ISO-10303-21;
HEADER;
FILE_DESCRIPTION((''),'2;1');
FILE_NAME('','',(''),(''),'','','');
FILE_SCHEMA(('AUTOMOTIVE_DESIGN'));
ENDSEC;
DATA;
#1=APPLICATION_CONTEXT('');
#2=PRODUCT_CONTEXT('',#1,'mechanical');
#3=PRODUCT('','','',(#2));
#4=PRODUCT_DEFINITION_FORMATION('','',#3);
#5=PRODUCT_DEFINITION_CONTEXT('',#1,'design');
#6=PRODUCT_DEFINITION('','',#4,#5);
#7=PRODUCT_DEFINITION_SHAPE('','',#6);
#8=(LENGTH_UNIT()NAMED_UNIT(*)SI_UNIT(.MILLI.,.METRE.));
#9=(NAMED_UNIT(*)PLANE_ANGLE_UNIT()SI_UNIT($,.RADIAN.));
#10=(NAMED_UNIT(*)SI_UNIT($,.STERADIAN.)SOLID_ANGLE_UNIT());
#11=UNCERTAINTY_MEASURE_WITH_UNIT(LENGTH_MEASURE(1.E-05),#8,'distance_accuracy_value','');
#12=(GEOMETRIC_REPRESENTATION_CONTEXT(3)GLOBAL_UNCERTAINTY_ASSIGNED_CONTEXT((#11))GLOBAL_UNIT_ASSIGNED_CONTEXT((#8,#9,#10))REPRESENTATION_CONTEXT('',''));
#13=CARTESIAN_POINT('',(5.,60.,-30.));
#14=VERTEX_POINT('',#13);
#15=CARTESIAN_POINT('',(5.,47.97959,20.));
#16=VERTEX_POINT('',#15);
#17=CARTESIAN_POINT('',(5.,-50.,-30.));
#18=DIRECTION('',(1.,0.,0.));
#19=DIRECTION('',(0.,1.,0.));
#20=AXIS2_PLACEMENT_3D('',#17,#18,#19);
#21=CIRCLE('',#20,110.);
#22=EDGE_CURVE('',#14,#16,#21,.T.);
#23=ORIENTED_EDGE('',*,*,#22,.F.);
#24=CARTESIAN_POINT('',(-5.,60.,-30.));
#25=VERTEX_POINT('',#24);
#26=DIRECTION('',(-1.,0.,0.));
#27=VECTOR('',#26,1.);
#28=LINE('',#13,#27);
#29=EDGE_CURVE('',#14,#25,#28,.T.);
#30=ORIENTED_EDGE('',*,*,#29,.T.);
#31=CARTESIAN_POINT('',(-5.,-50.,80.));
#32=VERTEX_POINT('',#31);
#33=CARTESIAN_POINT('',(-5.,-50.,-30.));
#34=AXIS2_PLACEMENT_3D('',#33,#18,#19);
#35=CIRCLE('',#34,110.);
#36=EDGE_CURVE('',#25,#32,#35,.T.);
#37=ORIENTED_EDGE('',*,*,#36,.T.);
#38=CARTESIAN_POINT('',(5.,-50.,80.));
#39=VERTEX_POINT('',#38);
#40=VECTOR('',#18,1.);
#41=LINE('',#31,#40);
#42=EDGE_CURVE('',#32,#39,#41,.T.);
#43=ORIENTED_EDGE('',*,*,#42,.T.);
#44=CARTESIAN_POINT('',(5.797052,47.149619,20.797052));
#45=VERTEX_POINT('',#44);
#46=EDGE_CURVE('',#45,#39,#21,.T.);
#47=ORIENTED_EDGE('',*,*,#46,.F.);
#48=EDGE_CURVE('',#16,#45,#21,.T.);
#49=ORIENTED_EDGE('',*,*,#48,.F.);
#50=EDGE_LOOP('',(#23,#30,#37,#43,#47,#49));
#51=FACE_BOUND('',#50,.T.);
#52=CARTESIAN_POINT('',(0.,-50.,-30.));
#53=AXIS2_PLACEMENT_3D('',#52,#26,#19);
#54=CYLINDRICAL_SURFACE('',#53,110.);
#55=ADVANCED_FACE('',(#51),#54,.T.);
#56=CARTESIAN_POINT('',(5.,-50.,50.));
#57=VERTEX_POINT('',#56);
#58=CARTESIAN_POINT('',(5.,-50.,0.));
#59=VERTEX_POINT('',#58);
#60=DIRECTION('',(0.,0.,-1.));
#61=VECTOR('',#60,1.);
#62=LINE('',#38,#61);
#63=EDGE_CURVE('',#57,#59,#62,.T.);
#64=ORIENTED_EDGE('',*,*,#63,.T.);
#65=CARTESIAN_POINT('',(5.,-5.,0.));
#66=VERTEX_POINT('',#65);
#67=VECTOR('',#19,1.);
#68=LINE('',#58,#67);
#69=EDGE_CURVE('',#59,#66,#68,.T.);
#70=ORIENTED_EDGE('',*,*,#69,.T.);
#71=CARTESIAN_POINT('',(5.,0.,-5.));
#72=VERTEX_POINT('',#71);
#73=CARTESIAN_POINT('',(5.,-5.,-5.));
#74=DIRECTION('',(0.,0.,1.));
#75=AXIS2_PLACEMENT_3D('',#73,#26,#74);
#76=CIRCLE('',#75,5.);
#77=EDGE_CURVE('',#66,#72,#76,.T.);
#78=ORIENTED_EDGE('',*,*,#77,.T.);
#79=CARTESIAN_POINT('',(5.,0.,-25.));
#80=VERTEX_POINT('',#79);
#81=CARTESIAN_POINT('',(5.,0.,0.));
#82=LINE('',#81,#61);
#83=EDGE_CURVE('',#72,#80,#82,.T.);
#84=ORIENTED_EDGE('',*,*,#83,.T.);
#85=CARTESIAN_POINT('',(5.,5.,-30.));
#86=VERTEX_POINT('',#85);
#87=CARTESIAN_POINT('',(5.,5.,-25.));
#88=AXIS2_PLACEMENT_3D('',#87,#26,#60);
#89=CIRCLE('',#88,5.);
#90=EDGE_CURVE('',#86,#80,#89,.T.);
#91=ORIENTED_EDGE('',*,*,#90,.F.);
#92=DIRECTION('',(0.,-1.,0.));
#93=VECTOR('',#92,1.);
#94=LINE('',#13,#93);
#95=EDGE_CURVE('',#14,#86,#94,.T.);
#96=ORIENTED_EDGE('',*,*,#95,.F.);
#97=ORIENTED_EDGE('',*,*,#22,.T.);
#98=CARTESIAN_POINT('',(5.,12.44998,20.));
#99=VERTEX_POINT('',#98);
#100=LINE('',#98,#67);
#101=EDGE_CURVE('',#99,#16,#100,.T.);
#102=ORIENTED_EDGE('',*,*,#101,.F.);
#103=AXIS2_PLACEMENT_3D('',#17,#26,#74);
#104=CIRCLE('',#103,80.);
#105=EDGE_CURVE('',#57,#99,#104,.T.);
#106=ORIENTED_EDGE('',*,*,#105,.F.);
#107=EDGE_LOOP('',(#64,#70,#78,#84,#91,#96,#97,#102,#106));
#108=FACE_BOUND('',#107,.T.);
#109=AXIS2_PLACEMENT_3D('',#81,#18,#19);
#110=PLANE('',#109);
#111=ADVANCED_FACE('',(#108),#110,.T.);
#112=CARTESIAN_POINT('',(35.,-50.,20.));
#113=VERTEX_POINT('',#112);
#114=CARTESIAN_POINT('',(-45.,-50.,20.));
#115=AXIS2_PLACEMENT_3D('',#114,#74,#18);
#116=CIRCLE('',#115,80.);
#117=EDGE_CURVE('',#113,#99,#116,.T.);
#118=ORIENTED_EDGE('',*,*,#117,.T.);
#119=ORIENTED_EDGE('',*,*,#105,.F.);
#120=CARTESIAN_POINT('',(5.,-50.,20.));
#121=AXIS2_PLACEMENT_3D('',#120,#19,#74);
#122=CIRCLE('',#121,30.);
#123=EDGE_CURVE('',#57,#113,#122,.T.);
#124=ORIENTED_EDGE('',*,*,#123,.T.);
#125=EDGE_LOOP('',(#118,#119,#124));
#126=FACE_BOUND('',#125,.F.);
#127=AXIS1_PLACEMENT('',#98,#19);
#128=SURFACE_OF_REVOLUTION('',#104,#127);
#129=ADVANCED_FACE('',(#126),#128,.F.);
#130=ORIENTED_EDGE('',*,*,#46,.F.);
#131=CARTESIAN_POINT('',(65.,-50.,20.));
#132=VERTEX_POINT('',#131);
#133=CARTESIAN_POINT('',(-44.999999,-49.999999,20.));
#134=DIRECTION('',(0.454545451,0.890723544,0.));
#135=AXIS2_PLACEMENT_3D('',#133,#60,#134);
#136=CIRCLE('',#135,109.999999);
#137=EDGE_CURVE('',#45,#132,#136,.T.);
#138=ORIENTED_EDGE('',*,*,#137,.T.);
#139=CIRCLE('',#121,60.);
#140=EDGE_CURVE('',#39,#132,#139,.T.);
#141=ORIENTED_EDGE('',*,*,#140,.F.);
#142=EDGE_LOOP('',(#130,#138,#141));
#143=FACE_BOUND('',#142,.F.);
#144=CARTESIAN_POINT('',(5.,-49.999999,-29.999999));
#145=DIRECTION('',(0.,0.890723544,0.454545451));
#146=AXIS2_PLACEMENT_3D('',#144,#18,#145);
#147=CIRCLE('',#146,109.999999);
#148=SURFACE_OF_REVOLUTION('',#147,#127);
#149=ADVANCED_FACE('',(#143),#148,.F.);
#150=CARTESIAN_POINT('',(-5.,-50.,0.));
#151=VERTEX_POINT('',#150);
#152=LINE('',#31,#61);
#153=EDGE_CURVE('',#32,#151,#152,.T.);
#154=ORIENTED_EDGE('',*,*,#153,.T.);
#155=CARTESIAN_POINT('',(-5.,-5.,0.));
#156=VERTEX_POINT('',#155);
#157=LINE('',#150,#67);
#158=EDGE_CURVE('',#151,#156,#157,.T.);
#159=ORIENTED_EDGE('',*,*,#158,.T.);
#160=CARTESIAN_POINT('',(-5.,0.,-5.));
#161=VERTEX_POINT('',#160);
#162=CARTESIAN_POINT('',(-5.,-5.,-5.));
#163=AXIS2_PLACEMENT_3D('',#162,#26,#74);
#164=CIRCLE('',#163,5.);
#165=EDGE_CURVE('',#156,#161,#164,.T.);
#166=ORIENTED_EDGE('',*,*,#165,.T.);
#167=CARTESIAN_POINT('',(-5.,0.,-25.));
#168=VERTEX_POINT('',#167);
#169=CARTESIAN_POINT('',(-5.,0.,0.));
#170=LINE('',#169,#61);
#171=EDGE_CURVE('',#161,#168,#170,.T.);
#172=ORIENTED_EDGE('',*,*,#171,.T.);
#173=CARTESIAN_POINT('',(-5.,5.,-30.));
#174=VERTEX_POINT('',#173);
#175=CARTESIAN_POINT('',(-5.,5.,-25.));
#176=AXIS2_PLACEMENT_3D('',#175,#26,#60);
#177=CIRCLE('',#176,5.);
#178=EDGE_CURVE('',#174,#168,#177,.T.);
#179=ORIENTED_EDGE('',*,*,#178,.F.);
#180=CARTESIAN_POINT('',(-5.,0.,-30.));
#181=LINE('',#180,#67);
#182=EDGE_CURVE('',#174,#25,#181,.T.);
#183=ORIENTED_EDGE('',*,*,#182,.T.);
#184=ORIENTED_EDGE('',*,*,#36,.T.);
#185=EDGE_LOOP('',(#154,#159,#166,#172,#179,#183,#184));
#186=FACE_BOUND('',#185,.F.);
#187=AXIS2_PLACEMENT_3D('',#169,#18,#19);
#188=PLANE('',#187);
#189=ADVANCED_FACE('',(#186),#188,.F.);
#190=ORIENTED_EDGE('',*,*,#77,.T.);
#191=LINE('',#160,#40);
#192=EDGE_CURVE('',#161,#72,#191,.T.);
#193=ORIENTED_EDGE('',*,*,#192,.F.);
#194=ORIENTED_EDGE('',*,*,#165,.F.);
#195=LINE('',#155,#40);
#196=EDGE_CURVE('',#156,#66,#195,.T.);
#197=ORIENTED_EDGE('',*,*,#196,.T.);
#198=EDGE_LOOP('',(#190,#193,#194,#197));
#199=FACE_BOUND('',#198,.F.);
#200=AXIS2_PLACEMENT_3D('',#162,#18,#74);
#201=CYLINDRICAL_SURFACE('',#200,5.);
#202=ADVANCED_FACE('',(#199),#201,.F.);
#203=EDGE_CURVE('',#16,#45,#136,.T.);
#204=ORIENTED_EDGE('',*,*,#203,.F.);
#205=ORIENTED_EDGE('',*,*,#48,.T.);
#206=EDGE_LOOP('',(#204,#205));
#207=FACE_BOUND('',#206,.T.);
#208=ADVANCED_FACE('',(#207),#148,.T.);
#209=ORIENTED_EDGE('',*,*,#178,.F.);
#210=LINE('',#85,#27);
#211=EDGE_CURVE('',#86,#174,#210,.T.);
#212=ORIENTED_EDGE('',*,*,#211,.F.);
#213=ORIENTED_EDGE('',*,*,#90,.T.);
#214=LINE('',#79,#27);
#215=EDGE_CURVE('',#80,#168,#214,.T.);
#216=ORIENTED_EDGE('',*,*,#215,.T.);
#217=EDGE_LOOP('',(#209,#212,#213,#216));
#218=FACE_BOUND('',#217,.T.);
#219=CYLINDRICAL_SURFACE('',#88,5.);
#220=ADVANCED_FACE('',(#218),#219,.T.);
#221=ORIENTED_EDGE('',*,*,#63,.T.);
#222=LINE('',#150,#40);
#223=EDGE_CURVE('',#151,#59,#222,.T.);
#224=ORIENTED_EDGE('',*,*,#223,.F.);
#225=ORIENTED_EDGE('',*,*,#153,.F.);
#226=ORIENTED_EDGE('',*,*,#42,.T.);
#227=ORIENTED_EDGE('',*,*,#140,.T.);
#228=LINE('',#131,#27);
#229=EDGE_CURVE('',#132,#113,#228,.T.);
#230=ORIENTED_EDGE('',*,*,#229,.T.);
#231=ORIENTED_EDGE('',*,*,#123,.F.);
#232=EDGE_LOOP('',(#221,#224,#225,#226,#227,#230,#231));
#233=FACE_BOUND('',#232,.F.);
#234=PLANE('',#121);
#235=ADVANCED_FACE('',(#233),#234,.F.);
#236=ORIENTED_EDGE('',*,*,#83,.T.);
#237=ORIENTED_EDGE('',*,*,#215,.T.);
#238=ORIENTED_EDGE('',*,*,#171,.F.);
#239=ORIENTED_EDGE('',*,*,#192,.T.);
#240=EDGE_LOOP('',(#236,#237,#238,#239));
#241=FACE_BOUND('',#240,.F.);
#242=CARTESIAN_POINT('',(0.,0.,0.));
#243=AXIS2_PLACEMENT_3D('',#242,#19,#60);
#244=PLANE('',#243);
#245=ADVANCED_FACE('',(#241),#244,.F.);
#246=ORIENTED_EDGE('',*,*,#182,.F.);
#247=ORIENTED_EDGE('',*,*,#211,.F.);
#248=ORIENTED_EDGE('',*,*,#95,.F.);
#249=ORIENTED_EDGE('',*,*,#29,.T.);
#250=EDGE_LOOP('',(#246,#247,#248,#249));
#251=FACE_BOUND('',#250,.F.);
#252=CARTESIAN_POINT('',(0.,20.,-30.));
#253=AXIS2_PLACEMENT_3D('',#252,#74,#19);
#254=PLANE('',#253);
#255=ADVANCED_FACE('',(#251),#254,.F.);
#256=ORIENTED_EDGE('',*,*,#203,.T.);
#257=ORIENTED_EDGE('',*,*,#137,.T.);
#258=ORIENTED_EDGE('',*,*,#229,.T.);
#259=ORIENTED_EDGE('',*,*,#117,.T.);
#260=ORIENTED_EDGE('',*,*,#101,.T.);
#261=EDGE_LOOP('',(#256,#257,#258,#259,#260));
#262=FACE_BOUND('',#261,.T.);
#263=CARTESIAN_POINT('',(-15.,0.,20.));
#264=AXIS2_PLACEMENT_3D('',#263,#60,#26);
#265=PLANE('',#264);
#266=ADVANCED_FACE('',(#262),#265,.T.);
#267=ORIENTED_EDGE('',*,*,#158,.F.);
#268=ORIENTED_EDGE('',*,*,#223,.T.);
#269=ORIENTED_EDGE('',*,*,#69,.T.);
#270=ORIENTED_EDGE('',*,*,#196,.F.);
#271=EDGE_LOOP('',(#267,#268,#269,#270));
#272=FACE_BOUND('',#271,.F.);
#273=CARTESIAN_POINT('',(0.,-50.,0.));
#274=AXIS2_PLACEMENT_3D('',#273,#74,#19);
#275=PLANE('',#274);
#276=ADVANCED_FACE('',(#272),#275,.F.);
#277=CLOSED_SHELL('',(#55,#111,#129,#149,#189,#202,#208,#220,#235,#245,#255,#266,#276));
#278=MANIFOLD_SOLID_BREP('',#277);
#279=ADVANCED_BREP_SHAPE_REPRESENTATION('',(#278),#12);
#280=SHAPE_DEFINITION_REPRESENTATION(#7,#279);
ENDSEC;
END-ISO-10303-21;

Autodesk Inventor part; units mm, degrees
sketch "Эскиз1" plane through (0, 0, 0) normal (1, 0, 0) x (0, 1, 0)
  line L0 (-50, 80) -> (-50, 0)
  line L1 (-50, 0) -> (0, 0)
  line L2 (0, 0) -> (0, -30)
  line L3 (0, -30) -> (20, -30)
  line L4 (20, -30) -> (20, -45)
  line L5 (20, -45) -> (60, -45)
  line L6 (60, -45) -> (60, -30)
  arc A0 (60, -30) -> (-50, 80) centre (-50, -30) ccw
  line L7 (20, -30) -> (60, -30)
  dimension "d1" = 50
  dimension "d2" = 80
  dimension "d5" = 30
  dimension "d6" = 20
  dimension "d7" = 15
  dimension "d8" = 40
extrude "Выдавливание1" add sketch "Эскиз1" along normal mid plane 10 contours A0 L7 L3 L2 L1 L0
fillet "Сопряжение1" radius 5 2 edges at (0, 0, 0) (0, 0, -30)
sketch "Эскиз4" plane through (5, 0, 0) normal (1, 0, 0) x (0, 0, -1)
  arc A0 (30, 60) -> (-80, -50) centre (30, -50) ccw
  line L0 (-80, -50) -> (-50, -50)
  line L1 (-80, -50) -> (0, -50)
  arc A1 (-20, 12.44998) -> (-50, -50) centre (30, -50) ccw
  line L2 (-20, 12.44998) -> (-60.553851, 12.44998)
  line L3 (-20, -37.5) -> (-20, -62.5)
  line L4 (-20, 12.44998) -> (-20, 47.97959)
  point P0 (0, 0)
  point P1 (-20, -50)
  dimension "d16" = 30
  dimension "d19" = 25
  dimension "d20" = 30
sketch "Эскиз4 outline for Вращение2" plane through (5, 0, 0) normal (1, 0, 0) x (0, 0, -1)
  arc A0 (-50, -50) -> (-20, 12.44998) centre (30, -50) cw
  line L0 (-20, 12.44998) -> (-20, 47.97959)
  arc A1 (-20, 47.97959) -> (-80, -50) centre (30, -50) ccw
  line L1 (-80, -50) -> (-50, -50)
revolve "Вращение2" add sketch "Эскиз4 outline for Вращение2" angle 90 about axis through (5, -37.5, 20) along (0, 1, 0)
ref_plane "РабПлоскость1" through (35, -50, -45) normal (0, 0, 1) x (1, 0, 0)
ref_plane "РабПлоскость2" through (-5, 20, -30) normal (0, 0, 1) x (1, 0, 0)
sketch "Эскиз24" plane through (5, 60, -30) normal (0, 0, -1) x (-1, 0, 0)
  arc A0 (-20, 0) -> (-60, -40) centre (-20, -40) ccw
  line L0 (10, 0) -> (0, 0) projected
  line L1 (0, 0) -> (-20, 0)
  line L2 (-60, -40) -> (-60, -110)
  line L3 (-60, -110) -> (0, -110)
  line L4 (0, -55) -> (0, 0) projected
  line L5 (0, -110) -> (0, 0)
sketch "Эскиз18" plane through (5, 12.44998, 20) normal (0, 0, -1) x (-1, 0, 0)
  arc A0 (0, 35.52961) -> (-60, -62.44998) centre (50, -62.44998) ccw
  line L0 (-60, -62.44998) -> (-30, -62.44998)
  arc A1 (0, 0) -> (-30, -62.44998) centre (50, -62.44998) ccw
  line L1 (0, 35.52961) -> (0, 0)
  point P0 (5, -12.44998)
sketch "Эскиз19" plane through (5, 0, 0) normal (1, 0, 0) x (0, 0, -1)
  arc A0 (30, 60) -> (-20, 47.97959) centre (30, -50) ccw
  point P0 (0, 0)
ref_plane "РабПлоскость3" through (75, 0, 0) normal (1, 0, 0) x (0, 0, -1)
sketch "Эскиз23" plane through (75, 0, 0) normal (1, 0, 0) x (0, 0, -1)
  line L0 (40, -50) -> (-60, -50)
  point P0 (0, 0)
  point P1 (-20, -50)
  dimension "d111" = 100
  dimension "d112" = 40
sketch "Эскиз16" plane through (-5, 5, -30) normal (0, 0, -1) x (-1, 0, 0)
  line L0 (0, 0) -> (-10, 0)
  line L1 (0, 55) -> (0, 0)
  line L2 (0, 55) -> (-10, 55)
  line L3 (-10, 0) -> (-10, 18.536525)
  line L4 (-10, 55) -> (-30, 55)
  arc A0 (-30, 55) -> (-70, 15) centre (-30, 15) ccw
  line L5 (-70, 15) -> (-70, -55)
  line L6 (-70, -55) -> (-10, -55)
  line L7 (-10, -55) -> (-10, 0)
  point P0 (-5, -5)
sketch "Эскиз25" plane through (-5, -50, 0) normal (0, -1, 0) x (1, 0, 0)
  line L0 (0, -30) -> (0, -45) projected
  line L1 (0, -45) -> (42, -45)
  line L2 (42, -45) -> (42, 51)
  line L3 (42, 51) -> (0, 51)
  line L4 (0, 51) -> (0, -45)
  point P0 (5, 0)
  dimension "d124" = 42
  dimension "d125" = 96
sketch "Эскиз26" plane through (-5, 0, 0) normal (-1, 0, 0) x (0, 0, 1)
  line L0 (-36.339746, 50) -> (-36.339746, 30)
  line L1 (-45, 45) -> (-36.339746, 50)
  line L2 (-36.339746, 30) -> (-45, 35)
  line L3 (-45, 20) -> (-45, 60)
  circle A0 centre (15, -35) radius 5
  point P0 (0, 0)
sketch "Эскиз27" plane through (-5, 5, -45) normal (0, 0, -1) x (-1, 0, 0)
  line L0 (-62.5, -48) -> (-60, -55) projected
  line L1 (-47.5, -48) -> (-62.5, -48) projected
  line L2 (-50, -55) -> (-47.5, -48) projected
  line L3 (-70, -55) -> (0, -55) projected
  point P0 (-5, -5)
properties part number "Уголок_передней_крышки_2.0"
